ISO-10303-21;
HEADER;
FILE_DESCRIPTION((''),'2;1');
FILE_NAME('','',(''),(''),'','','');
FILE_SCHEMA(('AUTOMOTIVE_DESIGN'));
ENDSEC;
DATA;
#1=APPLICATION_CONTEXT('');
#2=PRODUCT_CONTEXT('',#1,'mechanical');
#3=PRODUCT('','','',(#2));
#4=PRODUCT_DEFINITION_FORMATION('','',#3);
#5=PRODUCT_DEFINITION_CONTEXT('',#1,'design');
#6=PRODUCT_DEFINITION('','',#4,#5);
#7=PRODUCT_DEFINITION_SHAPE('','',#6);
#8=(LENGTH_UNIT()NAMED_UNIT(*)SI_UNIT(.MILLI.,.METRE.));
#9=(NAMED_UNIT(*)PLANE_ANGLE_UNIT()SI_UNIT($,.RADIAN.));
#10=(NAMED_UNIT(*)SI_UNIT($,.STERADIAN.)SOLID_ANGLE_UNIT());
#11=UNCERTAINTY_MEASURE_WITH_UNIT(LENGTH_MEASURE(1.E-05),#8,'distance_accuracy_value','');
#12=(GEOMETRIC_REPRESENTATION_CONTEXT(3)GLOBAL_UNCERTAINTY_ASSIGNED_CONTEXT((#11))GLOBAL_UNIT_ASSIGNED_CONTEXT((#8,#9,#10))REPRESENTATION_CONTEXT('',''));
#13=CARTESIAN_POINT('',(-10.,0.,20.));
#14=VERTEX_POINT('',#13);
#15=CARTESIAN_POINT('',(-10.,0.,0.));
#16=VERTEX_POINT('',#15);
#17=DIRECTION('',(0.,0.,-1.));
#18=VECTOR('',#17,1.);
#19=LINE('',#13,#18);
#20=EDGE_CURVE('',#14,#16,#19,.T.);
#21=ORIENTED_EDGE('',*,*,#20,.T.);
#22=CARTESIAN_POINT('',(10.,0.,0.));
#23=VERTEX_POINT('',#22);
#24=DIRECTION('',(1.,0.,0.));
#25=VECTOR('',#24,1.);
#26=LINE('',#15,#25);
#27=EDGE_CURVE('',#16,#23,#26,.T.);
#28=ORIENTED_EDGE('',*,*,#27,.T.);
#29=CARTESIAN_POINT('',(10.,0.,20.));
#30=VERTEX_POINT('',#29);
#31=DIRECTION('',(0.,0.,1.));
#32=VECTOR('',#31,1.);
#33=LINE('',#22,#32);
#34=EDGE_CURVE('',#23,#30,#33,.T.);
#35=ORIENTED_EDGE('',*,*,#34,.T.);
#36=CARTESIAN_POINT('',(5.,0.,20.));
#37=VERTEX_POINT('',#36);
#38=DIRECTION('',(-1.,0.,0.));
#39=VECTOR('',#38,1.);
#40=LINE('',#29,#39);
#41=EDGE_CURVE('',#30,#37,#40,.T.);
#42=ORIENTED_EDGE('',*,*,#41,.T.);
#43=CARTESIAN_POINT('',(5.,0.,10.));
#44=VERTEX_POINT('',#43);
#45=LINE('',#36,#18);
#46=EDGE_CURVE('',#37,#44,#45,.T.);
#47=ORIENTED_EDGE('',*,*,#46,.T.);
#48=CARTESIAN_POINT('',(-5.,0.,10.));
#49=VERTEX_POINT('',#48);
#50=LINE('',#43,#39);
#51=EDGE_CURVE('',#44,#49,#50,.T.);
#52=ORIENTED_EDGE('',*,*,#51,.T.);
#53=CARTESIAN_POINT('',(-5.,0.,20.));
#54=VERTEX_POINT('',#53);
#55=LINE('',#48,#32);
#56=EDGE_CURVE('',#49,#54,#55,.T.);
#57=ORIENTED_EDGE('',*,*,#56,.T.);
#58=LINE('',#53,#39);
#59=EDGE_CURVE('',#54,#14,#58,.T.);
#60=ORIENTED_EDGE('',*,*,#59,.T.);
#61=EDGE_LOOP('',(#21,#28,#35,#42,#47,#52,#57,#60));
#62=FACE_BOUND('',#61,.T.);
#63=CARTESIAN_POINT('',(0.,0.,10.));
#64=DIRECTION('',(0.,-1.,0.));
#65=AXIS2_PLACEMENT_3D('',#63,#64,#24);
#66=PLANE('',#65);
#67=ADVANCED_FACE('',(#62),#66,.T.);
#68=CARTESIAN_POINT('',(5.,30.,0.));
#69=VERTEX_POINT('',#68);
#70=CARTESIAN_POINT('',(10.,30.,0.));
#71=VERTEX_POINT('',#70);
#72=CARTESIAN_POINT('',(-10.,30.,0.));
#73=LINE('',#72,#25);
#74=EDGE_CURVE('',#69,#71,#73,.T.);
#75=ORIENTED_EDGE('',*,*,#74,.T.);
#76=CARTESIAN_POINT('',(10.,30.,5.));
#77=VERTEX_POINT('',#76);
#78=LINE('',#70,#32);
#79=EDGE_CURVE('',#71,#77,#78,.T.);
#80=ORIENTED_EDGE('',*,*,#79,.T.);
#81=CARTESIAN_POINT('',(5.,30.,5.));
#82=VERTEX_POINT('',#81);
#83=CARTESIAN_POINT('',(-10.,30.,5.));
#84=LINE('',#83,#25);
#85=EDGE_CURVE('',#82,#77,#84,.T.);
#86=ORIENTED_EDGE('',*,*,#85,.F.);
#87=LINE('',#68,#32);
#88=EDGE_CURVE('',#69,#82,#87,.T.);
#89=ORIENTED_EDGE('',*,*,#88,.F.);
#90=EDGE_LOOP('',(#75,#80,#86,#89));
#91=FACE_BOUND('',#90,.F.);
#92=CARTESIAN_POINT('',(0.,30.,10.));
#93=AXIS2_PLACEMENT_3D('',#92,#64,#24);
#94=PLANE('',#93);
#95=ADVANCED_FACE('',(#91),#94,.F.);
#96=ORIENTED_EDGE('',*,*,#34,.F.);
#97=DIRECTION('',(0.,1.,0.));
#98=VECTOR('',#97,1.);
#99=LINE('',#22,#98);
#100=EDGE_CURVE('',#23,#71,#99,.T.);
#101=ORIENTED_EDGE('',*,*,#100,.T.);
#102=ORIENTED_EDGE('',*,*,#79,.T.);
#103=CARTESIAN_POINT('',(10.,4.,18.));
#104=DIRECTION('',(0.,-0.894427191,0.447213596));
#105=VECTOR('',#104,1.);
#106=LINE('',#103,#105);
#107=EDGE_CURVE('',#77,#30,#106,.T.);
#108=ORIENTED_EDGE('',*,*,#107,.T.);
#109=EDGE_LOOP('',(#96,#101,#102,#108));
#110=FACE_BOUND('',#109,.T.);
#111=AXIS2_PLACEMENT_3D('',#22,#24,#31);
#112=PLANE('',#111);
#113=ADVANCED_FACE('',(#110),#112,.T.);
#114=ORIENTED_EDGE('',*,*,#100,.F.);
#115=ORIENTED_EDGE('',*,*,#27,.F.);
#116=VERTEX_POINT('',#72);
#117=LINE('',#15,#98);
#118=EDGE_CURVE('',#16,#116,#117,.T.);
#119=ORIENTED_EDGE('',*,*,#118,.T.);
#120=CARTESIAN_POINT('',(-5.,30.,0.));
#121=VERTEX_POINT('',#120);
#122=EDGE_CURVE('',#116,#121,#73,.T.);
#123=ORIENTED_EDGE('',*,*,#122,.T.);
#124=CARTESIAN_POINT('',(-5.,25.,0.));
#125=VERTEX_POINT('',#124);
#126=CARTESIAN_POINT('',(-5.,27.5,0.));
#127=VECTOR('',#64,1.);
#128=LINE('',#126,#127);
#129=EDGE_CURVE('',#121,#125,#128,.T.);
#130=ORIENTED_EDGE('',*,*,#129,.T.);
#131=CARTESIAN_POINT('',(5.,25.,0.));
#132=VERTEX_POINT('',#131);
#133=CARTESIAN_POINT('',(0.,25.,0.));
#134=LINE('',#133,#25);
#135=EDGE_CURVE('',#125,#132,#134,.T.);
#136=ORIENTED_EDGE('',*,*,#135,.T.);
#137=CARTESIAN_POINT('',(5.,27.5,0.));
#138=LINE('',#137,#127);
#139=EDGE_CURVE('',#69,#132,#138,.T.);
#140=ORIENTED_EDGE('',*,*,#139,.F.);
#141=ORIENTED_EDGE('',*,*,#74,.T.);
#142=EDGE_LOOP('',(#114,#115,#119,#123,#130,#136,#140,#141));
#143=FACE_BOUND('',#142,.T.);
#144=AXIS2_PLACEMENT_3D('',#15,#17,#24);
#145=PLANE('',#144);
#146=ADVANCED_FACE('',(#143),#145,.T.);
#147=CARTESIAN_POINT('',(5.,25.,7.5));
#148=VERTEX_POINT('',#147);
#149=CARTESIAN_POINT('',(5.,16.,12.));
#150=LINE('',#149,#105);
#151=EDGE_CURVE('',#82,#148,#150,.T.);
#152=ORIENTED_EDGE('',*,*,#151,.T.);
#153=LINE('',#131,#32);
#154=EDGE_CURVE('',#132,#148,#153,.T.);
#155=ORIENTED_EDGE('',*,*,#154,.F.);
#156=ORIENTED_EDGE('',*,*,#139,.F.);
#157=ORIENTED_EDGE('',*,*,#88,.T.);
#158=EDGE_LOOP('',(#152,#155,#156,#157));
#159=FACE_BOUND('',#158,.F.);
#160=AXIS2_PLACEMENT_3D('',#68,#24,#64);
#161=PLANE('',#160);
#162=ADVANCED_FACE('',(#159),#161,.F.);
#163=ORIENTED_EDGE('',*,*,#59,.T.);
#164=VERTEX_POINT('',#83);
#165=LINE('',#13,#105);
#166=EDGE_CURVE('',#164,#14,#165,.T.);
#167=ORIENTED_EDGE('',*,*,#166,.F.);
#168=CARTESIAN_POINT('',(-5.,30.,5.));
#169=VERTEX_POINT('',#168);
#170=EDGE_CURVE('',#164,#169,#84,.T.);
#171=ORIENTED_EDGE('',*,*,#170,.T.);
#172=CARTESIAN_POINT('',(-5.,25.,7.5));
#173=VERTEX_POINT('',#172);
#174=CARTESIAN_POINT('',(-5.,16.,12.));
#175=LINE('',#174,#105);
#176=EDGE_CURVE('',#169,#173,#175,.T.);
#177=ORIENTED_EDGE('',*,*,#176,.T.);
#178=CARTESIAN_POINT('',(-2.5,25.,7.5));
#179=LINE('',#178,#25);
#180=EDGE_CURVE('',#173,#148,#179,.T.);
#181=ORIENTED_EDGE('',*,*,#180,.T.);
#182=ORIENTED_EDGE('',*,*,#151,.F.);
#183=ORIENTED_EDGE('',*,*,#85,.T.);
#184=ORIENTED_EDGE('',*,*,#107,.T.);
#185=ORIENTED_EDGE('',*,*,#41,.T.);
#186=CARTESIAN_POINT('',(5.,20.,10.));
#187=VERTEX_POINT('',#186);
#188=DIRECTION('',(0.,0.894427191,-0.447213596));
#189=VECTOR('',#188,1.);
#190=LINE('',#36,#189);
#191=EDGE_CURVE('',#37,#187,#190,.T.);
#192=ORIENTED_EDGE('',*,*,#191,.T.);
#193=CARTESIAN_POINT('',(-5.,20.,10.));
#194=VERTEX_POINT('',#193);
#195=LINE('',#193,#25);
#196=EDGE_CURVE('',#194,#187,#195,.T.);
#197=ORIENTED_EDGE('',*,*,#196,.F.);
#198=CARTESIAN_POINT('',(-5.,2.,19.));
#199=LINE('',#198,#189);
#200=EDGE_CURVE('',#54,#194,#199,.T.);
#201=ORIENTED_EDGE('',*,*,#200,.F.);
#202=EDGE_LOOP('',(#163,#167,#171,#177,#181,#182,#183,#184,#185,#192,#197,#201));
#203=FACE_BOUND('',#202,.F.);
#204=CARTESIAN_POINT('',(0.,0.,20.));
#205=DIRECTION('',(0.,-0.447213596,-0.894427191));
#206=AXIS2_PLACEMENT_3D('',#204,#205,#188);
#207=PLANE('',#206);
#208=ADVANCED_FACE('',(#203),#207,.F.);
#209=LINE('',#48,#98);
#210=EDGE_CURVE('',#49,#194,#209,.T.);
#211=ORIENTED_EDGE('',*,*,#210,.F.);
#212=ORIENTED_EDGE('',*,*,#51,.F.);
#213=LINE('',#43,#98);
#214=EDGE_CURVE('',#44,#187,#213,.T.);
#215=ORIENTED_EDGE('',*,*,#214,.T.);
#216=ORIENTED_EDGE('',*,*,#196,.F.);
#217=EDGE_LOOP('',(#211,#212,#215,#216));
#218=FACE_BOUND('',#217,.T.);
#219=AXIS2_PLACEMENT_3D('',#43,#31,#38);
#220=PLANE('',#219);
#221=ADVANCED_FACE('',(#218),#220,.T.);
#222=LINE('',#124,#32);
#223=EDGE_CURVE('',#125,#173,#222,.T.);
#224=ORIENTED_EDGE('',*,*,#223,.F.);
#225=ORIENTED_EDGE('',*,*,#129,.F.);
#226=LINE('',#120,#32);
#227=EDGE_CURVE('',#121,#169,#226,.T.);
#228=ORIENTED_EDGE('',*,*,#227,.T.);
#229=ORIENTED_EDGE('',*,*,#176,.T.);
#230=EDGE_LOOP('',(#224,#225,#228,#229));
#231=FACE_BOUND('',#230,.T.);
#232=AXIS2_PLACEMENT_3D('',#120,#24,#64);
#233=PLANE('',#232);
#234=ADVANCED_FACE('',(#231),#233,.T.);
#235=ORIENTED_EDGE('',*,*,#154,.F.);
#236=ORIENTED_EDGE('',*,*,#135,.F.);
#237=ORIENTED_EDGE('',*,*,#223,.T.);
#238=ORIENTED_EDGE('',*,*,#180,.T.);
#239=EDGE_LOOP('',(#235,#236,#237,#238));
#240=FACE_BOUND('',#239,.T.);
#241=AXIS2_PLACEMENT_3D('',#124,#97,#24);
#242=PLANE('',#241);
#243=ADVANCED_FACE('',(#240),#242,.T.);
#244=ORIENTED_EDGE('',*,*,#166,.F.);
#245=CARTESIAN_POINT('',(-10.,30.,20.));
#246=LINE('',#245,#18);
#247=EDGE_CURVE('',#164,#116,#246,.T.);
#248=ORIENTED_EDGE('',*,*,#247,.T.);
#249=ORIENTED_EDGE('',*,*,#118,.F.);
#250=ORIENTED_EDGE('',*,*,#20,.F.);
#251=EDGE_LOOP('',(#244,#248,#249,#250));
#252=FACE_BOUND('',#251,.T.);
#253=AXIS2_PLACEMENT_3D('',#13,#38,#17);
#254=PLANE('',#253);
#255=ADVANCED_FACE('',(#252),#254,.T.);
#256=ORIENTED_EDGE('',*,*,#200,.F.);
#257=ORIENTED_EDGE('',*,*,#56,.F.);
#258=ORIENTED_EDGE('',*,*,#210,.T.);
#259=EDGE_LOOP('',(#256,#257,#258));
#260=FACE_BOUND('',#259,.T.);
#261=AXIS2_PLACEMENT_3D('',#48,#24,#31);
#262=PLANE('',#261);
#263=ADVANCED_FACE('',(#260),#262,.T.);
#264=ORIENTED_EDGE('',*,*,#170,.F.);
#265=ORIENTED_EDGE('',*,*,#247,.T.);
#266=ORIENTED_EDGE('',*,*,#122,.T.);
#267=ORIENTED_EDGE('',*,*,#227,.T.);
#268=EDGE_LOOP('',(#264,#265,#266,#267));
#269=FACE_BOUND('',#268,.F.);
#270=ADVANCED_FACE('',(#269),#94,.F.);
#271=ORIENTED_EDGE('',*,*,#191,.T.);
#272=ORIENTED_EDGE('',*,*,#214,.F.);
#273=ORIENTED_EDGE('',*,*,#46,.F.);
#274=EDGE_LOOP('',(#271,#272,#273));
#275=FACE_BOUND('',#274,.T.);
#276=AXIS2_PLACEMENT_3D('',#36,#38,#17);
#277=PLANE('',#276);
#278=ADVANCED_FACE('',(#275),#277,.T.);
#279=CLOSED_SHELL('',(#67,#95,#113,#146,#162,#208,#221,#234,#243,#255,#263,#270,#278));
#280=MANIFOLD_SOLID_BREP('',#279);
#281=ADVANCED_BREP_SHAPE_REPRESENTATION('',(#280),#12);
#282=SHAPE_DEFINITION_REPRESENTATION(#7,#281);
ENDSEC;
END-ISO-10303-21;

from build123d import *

# Parameters (mm, degrees)
F1_DEPTH      = 30
F3_DEPTH      = 10.001
F3_DEPTH_BACK = 10.001
F4_W          = 10
F4_H          = 5
F5_DEPTH      = 20.001


with BuildPart() as f1:
    # F0 (on Front) → F1 (new body)
    with BuildSketch(Plane.XZ):
        Polygon((-10, 0), (0, 0), (10, 0), (10, 20), (5, 20), (5, 10), (-5, 10), (-5, 20), (-10, 20), align=None)
    extrude(amount=-F1_DEPTH)

    # F2 (on Right) → F3 (cut, two sides)
    with BuildSketch(Plane.YZ) as f3_sk:
        Polygon((30, 5), (30, 20), (0, 20), align=None)
    extrude(amount=-F3_DEPTH, mode=Mode.SUBTRACT)
    extrude(f3_sk.sketch, amount=F3_DEPTH_BACK, mode=Mode.SUBTRACT)

    # F4 (on face) → F5 (cut, through all)
    with BuildSketch(Plane(origin=(0, 0, 0), x_dir=(1, 0, 0), z_dir=(0, 0, -1))):
        with Locations((0, -27.5)):
            Rectangle(F4_W, F4_H)
    extrude(amount=-F5_DEPTH, mode=Mode.SUBTRACT)


solid = f1.part
